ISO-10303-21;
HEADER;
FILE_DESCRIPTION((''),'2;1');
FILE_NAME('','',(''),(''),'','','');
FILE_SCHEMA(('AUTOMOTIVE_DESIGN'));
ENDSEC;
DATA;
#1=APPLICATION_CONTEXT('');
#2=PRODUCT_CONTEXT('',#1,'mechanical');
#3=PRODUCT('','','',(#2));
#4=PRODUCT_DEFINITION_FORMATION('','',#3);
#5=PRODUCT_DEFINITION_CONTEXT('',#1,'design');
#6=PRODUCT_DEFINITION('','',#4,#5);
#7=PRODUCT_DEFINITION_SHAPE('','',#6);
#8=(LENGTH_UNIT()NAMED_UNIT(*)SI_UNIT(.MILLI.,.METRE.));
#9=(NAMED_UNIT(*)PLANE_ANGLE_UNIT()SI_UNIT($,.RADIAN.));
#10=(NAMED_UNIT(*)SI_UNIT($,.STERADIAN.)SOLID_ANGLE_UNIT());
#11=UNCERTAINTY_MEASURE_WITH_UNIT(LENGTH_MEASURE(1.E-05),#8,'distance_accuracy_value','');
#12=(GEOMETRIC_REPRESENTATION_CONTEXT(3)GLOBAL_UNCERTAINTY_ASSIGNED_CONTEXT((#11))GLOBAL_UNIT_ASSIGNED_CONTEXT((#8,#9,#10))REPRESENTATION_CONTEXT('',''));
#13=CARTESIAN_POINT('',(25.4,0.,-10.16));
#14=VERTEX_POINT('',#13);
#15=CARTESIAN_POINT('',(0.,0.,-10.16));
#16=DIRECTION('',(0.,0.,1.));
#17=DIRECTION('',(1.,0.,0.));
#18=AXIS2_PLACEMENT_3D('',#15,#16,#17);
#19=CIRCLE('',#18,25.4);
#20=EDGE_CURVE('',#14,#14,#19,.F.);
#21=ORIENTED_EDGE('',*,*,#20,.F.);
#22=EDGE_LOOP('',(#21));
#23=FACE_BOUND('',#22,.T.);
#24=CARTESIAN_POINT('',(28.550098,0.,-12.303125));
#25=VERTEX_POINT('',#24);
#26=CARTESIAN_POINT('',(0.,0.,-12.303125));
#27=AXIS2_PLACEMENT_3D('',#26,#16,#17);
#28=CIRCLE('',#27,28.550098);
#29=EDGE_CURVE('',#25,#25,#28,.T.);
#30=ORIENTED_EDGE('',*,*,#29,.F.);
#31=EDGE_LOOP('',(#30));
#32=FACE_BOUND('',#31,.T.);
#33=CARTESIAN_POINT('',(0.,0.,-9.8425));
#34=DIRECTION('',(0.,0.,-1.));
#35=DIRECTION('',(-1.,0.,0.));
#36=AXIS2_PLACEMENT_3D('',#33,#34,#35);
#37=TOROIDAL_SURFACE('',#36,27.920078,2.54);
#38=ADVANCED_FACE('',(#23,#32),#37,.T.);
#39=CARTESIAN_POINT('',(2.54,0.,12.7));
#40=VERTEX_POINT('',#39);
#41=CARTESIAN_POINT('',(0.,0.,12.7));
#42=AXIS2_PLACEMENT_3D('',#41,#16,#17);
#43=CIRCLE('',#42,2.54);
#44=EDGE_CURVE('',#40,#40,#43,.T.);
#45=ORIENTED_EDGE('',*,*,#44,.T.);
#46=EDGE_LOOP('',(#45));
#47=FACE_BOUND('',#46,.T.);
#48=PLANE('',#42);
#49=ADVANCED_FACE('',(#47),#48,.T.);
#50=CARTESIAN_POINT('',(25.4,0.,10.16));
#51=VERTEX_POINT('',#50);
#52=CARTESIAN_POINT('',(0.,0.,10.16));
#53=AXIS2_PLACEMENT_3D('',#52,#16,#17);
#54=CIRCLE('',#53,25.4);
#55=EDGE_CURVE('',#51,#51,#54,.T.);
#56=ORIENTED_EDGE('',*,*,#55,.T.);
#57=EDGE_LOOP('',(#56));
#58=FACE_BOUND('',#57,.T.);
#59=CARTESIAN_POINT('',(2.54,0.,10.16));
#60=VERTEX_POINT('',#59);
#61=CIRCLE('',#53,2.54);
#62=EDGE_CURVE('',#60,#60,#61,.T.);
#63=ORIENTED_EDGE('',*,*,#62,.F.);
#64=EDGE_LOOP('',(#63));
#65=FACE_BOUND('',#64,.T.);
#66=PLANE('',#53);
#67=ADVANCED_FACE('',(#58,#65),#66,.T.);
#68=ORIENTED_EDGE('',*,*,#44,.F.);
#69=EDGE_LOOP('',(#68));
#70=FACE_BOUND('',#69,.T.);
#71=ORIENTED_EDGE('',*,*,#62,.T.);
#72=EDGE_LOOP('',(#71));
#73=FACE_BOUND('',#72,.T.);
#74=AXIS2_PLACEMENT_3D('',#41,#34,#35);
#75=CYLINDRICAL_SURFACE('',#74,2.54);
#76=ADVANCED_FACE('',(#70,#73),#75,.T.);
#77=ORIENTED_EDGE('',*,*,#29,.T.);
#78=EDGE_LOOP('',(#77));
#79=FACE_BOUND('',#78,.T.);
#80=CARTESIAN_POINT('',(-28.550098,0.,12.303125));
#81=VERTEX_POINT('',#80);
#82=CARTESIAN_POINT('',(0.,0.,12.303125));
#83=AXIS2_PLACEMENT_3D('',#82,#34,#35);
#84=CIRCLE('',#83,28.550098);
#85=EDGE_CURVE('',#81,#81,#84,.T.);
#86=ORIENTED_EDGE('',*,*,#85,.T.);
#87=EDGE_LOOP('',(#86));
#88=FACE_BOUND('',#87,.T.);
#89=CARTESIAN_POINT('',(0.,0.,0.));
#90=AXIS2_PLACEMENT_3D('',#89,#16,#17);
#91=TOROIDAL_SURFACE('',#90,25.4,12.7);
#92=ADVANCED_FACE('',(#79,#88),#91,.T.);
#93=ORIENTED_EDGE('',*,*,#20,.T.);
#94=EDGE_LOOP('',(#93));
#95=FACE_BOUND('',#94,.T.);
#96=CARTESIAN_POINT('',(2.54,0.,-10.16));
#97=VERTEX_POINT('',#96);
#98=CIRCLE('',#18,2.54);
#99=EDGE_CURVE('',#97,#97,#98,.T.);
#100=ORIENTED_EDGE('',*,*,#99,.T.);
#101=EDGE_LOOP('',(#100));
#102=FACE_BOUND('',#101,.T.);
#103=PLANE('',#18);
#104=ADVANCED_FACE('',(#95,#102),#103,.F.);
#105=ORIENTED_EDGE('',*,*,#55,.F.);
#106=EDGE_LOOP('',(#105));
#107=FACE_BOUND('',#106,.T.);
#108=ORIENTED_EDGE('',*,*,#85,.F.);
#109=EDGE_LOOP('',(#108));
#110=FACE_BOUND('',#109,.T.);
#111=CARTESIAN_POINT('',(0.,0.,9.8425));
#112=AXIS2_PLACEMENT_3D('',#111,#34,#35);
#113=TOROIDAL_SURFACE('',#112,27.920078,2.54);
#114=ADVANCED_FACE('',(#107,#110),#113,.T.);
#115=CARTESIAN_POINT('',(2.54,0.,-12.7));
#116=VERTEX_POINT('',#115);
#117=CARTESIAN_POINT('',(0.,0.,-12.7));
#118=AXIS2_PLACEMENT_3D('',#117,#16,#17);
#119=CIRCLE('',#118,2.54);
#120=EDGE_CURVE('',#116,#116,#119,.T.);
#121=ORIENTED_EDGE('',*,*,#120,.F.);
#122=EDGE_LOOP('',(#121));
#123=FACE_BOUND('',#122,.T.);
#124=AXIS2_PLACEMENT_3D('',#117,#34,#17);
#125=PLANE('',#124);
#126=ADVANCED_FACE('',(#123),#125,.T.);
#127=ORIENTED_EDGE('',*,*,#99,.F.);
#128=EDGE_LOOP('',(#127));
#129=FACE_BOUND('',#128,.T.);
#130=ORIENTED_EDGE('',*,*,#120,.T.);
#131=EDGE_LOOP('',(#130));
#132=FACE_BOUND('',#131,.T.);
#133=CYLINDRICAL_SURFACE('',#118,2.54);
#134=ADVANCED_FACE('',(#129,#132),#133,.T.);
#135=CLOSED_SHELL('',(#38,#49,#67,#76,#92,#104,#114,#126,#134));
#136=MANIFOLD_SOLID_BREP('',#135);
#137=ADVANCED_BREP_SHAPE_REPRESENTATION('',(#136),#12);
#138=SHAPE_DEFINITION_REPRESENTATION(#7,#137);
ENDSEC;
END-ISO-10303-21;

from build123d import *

# Parameters (mm, degrees)
BOSS_EXTRUDE1_DEPTH      = 10.16
BOSS_EXTRUDE1_DEPTH_BACK = 10.16
SKETCH4_R                = 25.4
SKETCH5_R                = 2.54
BOSS_EXTRUDE2_DEPTH      = 2.54
FILLET1_R                = 2.54


with BuildPart() as part:
    # Sketch1 → Revolve1 (revolve)
    with BuildSketch(Plane(origin=(0, 0, 0), x_dir=(0, 0, -1), z_dir=(1, 0, 0)), mode=Mode.PRIVATE) as revolve1_sk:
        with BuildLine():
            Line((-12.7, 25.4), (12.7, 25.4))
            ThreePointArc((12.7, 25.4), (0, 38.1), (-12.7, 25.4))
        make_face()
    revolve(revolve1_sk.sketch.rotate(Axis((0, 0, 0), (0, 0, -1)), 90), axis=Axis((0, 0, 0), (0, 0, -1)))

    # Sketch4 → Boss-Extrude1 (add, two sides: drawn at the far end of the back side and taken through both)
    with BuildSketch(Plane.XY.offset(-BOSS_EXTRUDE1_DEPTH_BACK)):
        Circle(SKETCH4_R)
    extrude(amount=BOSS_EXTRUDE1_DEPTH + BOSS_EXTRUDE1_DEPTH_BACK)

    # Sketch5 → Boss-Extrude2 (add)
    with BuildSketch(Plane.XY.offset(10.16)):
        Circle(SKETCH5_R)
    boss_extrude2 = extrude(amount=BOSS_EXTRUDE2_DEPTH)

    # Mirror1: Boss-Extrude2 across plane
    add(boss_extrude2.mirror(Plane.XY))

    # Fillet1
    # the kernel refuses this fillet: 2.54 mm, written as the material it takes off along each edge
    with BuildSketch(Plane(origin=(0, 0, -12.7), x_dir=(1, 0, 0), z_dir=(0, 1, 0))) as fillet1_piece_1:
        with BuildLine():
            CenterArc((27.920078124, -2.8575), FILLET1_R, 75.638488437, 97.180755781)
            Line((25.4, -2.54), (25.349598438, -2.53365))
            ThreePointArc((25.349598438, -2.53365), (25.3492, -1.27), (25.3492, 0))
            Line((25.3492, 0), (25.4, 0.0508))
            ThreePointArc((25.4, 0.0508), (26.99385, -0.049207819), (28.562698045, -0.3476625))
            Line((28.562698045, -0.3476625), (28.550097655, -0.396875))
        make_face()
    revolve(axis=Axis((0, 0, -12.7), (0, 0, -1)), mode=Mode.SUBTRACT)
    with BuildSketch(Plane(origin=(0, 0, 12.7), x_dir=(1, 0, 0), z_dir=(0, 1, 0))) as fillet1_piece_2:
        with BuildLine():
            CenterArc((27.920078124, 2.8575), FILLET1_R, 187.180755781, 97.180755781)
            Line((28.550097655, 0.396875), (28.562698045, 0.3476625))
            ThreePointArc((28.562698045, 0.3476625), (26.99385, 0.049207819), (25.4, -0.0508))
            Line((25.4, -0.0508), (25.3492, 0))
            ThreePointArc((25.3492, 0), (25.3492, 1.27), (25.349598438, 2.53365))
            Line((25.349598438, 2.53365), (25.4, 2.54))
        make_face()
    revolve(axis=Axis((0, 0, 12.7), (0, 0, -1)), mode=Mode.SUBTRACT)


solid = part.part
